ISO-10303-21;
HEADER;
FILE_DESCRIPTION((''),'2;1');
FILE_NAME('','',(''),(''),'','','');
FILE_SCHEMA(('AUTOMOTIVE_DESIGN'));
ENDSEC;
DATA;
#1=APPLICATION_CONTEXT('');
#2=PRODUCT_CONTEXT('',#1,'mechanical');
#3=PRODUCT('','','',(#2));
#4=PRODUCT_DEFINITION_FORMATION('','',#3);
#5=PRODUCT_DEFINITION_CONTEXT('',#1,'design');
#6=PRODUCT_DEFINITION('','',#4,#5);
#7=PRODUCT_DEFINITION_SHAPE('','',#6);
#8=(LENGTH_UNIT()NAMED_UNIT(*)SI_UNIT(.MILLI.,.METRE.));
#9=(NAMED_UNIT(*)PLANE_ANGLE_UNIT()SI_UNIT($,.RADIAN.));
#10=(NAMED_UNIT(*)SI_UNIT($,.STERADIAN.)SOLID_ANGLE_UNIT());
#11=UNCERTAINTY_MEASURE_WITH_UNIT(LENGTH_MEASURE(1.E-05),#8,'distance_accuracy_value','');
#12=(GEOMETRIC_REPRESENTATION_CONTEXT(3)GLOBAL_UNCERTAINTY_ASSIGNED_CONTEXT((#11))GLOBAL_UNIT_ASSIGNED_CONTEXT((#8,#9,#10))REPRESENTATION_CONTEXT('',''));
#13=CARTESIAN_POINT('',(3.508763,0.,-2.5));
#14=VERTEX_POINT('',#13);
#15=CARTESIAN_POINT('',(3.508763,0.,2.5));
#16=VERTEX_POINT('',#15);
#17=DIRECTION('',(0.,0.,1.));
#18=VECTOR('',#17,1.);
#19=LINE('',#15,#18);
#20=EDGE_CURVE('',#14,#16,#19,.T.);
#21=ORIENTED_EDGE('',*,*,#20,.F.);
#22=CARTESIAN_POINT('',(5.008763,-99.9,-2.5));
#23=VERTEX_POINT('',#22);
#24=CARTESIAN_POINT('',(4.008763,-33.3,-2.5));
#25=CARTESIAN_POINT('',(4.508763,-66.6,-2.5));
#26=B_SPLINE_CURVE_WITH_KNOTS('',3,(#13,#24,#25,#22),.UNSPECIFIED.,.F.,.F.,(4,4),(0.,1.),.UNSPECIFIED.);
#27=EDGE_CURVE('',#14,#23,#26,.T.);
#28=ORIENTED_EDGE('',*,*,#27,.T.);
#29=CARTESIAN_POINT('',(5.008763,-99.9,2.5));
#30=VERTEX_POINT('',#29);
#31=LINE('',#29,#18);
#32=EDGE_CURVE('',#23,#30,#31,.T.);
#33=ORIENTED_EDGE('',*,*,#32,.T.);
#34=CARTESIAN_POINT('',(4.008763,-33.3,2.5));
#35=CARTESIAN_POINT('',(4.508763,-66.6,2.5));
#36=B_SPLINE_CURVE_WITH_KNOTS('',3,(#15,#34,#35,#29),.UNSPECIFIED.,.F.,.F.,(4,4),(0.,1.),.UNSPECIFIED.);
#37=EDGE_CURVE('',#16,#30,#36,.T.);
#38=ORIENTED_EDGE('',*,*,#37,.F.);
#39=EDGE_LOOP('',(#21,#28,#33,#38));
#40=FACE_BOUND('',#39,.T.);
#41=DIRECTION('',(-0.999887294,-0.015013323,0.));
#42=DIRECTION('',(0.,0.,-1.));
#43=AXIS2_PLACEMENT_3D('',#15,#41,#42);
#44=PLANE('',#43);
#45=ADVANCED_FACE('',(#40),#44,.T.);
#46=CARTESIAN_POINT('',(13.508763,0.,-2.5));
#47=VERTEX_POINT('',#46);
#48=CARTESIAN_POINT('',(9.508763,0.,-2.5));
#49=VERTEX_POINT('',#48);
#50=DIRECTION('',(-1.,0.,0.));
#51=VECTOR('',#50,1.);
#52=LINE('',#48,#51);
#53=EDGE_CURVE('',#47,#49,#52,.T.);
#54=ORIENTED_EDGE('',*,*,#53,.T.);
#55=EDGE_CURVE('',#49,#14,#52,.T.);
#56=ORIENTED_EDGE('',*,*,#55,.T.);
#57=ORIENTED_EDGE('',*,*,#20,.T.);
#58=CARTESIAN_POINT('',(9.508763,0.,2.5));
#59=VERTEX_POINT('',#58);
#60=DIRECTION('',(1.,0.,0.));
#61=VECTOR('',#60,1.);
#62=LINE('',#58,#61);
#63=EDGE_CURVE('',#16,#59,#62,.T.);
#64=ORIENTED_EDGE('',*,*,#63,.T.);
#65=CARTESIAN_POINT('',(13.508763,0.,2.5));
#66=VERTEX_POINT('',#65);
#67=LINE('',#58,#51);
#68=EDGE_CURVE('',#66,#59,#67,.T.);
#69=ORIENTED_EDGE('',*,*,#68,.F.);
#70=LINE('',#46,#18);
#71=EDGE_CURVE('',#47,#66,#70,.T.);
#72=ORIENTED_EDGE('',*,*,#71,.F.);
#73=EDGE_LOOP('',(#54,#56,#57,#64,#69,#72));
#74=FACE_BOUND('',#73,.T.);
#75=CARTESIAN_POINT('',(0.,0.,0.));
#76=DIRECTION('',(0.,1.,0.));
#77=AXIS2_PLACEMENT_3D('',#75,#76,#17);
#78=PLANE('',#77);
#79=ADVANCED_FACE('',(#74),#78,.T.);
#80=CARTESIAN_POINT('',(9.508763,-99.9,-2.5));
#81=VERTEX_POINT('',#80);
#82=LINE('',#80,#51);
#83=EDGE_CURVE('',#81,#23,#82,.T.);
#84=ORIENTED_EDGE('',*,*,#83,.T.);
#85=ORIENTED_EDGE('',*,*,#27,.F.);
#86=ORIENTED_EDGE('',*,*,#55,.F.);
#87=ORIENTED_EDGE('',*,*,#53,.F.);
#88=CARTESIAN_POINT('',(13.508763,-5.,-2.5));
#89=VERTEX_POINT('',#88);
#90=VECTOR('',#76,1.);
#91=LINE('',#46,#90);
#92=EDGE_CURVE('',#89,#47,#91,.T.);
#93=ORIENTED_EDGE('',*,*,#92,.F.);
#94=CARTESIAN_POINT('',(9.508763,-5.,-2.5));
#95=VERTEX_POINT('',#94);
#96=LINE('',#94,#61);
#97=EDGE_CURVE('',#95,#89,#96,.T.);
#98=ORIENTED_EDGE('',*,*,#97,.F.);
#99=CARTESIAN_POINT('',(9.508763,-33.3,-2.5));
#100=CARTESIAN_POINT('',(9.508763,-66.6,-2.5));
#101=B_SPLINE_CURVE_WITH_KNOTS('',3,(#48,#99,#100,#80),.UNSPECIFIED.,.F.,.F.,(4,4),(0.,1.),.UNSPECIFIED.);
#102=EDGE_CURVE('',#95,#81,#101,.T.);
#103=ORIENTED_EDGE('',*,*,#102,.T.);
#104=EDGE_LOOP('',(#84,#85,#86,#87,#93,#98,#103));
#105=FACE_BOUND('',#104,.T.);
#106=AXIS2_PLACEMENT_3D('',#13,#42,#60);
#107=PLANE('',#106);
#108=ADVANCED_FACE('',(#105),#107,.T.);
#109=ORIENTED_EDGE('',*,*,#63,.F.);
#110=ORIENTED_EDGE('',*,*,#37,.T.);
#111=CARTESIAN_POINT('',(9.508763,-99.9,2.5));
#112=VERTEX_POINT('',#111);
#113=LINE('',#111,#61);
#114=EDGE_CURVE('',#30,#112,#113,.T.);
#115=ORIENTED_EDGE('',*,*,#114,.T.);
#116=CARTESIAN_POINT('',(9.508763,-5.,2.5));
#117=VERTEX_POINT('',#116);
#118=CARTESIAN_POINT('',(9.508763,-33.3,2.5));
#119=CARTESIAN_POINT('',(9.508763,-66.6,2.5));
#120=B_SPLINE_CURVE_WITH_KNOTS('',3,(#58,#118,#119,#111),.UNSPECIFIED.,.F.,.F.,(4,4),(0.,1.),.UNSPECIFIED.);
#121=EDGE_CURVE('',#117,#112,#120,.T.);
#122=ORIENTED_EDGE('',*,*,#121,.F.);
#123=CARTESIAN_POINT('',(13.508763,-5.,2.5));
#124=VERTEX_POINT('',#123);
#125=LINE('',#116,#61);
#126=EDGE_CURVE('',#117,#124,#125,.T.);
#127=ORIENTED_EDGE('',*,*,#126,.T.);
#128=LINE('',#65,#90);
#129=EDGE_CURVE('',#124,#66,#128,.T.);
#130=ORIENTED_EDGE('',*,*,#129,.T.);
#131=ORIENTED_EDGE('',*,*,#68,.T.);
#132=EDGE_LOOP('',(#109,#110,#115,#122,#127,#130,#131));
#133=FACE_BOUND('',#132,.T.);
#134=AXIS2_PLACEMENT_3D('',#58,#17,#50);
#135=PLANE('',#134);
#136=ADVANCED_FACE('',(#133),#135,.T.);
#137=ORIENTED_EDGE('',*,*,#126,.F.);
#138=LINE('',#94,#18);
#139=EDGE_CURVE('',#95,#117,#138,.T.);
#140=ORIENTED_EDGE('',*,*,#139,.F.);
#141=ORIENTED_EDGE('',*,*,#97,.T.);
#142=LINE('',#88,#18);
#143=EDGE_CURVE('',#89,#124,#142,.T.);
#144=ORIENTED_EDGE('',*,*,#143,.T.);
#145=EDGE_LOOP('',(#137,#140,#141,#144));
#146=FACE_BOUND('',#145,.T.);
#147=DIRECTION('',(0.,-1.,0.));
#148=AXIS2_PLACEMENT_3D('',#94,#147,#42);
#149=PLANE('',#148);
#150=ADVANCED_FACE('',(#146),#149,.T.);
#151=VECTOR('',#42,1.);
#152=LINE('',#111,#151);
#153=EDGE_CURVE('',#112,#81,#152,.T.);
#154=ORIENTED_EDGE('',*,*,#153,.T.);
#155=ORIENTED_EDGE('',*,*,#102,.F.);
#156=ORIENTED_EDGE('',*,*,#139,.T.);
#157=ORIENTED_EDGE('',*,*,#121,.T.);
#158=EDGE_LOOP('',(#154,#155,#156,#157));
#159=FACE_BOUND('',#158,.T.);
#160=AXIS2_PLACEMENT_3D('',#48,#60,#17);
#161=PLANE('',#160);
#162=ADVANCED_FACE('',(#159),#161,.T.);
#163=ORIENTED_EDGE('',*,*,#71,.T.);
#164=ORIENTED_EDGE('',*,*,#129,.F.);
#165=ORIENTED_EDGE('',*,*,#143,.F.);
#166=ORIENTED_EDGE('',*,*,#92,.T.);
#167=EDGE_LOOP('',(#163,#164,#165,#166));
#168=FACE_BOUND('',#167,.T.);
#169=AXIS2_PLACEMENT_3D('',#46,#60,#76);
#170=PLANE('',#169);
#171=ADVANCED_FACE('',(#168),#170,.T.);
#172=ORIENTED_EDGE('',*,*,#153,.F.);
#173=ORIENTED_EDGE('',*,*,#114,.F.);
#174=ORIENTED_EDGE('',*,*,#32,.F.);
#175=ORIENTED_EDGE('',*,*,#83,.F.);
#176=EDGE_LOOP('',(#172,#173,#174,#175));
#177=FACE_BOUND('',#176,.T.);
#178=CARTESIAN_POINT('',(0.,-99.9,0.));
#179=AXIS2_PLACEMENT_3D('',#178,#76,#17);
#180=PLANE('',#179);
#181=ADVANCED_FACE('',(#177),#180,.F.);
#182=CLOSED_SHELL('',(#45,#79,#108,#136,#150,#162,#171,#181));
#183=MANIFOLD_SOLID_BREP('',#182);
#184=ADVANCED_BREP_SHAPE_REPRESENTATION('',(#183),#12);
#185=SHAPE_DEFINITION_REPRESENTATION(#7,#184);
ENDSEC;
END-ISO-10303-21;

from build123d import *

# Parameters (mm, degrees)
LOFT3_START         = -2.5
LOFT3_DEPTH         = 5
SKETCH7_W           = 4
SKETCH7_H           = 5
BOSS_EXTRUDE1_DEPTH = 5


# Read off the part's stored shape, not the designer's step: Loft3
with BuildPart() as part:
    # Loft3 outline → Loft3 (new body)
    with BuildSketch(Plane.XY.offset(LOFT3_START)):
        Polygon((5.008763306, -99.9), (9.508763306, -99.9), (9.508763306, 0), (3.508763306, 0), align=None)
    extrude(amount=LOFT3_DEPTH)

    # Sketch7 → Boss-Extrude1 (add)
    with BuildSketch(Plane.XY.offset(2.5)):
        with Locations((11.508763306, -2.5)):
            Rectangle(SKETCH7_W, SKETCH7_H)
    extrude(amount=-BOSS_EXTRUDE1_DEPTH)


solid = part.part
